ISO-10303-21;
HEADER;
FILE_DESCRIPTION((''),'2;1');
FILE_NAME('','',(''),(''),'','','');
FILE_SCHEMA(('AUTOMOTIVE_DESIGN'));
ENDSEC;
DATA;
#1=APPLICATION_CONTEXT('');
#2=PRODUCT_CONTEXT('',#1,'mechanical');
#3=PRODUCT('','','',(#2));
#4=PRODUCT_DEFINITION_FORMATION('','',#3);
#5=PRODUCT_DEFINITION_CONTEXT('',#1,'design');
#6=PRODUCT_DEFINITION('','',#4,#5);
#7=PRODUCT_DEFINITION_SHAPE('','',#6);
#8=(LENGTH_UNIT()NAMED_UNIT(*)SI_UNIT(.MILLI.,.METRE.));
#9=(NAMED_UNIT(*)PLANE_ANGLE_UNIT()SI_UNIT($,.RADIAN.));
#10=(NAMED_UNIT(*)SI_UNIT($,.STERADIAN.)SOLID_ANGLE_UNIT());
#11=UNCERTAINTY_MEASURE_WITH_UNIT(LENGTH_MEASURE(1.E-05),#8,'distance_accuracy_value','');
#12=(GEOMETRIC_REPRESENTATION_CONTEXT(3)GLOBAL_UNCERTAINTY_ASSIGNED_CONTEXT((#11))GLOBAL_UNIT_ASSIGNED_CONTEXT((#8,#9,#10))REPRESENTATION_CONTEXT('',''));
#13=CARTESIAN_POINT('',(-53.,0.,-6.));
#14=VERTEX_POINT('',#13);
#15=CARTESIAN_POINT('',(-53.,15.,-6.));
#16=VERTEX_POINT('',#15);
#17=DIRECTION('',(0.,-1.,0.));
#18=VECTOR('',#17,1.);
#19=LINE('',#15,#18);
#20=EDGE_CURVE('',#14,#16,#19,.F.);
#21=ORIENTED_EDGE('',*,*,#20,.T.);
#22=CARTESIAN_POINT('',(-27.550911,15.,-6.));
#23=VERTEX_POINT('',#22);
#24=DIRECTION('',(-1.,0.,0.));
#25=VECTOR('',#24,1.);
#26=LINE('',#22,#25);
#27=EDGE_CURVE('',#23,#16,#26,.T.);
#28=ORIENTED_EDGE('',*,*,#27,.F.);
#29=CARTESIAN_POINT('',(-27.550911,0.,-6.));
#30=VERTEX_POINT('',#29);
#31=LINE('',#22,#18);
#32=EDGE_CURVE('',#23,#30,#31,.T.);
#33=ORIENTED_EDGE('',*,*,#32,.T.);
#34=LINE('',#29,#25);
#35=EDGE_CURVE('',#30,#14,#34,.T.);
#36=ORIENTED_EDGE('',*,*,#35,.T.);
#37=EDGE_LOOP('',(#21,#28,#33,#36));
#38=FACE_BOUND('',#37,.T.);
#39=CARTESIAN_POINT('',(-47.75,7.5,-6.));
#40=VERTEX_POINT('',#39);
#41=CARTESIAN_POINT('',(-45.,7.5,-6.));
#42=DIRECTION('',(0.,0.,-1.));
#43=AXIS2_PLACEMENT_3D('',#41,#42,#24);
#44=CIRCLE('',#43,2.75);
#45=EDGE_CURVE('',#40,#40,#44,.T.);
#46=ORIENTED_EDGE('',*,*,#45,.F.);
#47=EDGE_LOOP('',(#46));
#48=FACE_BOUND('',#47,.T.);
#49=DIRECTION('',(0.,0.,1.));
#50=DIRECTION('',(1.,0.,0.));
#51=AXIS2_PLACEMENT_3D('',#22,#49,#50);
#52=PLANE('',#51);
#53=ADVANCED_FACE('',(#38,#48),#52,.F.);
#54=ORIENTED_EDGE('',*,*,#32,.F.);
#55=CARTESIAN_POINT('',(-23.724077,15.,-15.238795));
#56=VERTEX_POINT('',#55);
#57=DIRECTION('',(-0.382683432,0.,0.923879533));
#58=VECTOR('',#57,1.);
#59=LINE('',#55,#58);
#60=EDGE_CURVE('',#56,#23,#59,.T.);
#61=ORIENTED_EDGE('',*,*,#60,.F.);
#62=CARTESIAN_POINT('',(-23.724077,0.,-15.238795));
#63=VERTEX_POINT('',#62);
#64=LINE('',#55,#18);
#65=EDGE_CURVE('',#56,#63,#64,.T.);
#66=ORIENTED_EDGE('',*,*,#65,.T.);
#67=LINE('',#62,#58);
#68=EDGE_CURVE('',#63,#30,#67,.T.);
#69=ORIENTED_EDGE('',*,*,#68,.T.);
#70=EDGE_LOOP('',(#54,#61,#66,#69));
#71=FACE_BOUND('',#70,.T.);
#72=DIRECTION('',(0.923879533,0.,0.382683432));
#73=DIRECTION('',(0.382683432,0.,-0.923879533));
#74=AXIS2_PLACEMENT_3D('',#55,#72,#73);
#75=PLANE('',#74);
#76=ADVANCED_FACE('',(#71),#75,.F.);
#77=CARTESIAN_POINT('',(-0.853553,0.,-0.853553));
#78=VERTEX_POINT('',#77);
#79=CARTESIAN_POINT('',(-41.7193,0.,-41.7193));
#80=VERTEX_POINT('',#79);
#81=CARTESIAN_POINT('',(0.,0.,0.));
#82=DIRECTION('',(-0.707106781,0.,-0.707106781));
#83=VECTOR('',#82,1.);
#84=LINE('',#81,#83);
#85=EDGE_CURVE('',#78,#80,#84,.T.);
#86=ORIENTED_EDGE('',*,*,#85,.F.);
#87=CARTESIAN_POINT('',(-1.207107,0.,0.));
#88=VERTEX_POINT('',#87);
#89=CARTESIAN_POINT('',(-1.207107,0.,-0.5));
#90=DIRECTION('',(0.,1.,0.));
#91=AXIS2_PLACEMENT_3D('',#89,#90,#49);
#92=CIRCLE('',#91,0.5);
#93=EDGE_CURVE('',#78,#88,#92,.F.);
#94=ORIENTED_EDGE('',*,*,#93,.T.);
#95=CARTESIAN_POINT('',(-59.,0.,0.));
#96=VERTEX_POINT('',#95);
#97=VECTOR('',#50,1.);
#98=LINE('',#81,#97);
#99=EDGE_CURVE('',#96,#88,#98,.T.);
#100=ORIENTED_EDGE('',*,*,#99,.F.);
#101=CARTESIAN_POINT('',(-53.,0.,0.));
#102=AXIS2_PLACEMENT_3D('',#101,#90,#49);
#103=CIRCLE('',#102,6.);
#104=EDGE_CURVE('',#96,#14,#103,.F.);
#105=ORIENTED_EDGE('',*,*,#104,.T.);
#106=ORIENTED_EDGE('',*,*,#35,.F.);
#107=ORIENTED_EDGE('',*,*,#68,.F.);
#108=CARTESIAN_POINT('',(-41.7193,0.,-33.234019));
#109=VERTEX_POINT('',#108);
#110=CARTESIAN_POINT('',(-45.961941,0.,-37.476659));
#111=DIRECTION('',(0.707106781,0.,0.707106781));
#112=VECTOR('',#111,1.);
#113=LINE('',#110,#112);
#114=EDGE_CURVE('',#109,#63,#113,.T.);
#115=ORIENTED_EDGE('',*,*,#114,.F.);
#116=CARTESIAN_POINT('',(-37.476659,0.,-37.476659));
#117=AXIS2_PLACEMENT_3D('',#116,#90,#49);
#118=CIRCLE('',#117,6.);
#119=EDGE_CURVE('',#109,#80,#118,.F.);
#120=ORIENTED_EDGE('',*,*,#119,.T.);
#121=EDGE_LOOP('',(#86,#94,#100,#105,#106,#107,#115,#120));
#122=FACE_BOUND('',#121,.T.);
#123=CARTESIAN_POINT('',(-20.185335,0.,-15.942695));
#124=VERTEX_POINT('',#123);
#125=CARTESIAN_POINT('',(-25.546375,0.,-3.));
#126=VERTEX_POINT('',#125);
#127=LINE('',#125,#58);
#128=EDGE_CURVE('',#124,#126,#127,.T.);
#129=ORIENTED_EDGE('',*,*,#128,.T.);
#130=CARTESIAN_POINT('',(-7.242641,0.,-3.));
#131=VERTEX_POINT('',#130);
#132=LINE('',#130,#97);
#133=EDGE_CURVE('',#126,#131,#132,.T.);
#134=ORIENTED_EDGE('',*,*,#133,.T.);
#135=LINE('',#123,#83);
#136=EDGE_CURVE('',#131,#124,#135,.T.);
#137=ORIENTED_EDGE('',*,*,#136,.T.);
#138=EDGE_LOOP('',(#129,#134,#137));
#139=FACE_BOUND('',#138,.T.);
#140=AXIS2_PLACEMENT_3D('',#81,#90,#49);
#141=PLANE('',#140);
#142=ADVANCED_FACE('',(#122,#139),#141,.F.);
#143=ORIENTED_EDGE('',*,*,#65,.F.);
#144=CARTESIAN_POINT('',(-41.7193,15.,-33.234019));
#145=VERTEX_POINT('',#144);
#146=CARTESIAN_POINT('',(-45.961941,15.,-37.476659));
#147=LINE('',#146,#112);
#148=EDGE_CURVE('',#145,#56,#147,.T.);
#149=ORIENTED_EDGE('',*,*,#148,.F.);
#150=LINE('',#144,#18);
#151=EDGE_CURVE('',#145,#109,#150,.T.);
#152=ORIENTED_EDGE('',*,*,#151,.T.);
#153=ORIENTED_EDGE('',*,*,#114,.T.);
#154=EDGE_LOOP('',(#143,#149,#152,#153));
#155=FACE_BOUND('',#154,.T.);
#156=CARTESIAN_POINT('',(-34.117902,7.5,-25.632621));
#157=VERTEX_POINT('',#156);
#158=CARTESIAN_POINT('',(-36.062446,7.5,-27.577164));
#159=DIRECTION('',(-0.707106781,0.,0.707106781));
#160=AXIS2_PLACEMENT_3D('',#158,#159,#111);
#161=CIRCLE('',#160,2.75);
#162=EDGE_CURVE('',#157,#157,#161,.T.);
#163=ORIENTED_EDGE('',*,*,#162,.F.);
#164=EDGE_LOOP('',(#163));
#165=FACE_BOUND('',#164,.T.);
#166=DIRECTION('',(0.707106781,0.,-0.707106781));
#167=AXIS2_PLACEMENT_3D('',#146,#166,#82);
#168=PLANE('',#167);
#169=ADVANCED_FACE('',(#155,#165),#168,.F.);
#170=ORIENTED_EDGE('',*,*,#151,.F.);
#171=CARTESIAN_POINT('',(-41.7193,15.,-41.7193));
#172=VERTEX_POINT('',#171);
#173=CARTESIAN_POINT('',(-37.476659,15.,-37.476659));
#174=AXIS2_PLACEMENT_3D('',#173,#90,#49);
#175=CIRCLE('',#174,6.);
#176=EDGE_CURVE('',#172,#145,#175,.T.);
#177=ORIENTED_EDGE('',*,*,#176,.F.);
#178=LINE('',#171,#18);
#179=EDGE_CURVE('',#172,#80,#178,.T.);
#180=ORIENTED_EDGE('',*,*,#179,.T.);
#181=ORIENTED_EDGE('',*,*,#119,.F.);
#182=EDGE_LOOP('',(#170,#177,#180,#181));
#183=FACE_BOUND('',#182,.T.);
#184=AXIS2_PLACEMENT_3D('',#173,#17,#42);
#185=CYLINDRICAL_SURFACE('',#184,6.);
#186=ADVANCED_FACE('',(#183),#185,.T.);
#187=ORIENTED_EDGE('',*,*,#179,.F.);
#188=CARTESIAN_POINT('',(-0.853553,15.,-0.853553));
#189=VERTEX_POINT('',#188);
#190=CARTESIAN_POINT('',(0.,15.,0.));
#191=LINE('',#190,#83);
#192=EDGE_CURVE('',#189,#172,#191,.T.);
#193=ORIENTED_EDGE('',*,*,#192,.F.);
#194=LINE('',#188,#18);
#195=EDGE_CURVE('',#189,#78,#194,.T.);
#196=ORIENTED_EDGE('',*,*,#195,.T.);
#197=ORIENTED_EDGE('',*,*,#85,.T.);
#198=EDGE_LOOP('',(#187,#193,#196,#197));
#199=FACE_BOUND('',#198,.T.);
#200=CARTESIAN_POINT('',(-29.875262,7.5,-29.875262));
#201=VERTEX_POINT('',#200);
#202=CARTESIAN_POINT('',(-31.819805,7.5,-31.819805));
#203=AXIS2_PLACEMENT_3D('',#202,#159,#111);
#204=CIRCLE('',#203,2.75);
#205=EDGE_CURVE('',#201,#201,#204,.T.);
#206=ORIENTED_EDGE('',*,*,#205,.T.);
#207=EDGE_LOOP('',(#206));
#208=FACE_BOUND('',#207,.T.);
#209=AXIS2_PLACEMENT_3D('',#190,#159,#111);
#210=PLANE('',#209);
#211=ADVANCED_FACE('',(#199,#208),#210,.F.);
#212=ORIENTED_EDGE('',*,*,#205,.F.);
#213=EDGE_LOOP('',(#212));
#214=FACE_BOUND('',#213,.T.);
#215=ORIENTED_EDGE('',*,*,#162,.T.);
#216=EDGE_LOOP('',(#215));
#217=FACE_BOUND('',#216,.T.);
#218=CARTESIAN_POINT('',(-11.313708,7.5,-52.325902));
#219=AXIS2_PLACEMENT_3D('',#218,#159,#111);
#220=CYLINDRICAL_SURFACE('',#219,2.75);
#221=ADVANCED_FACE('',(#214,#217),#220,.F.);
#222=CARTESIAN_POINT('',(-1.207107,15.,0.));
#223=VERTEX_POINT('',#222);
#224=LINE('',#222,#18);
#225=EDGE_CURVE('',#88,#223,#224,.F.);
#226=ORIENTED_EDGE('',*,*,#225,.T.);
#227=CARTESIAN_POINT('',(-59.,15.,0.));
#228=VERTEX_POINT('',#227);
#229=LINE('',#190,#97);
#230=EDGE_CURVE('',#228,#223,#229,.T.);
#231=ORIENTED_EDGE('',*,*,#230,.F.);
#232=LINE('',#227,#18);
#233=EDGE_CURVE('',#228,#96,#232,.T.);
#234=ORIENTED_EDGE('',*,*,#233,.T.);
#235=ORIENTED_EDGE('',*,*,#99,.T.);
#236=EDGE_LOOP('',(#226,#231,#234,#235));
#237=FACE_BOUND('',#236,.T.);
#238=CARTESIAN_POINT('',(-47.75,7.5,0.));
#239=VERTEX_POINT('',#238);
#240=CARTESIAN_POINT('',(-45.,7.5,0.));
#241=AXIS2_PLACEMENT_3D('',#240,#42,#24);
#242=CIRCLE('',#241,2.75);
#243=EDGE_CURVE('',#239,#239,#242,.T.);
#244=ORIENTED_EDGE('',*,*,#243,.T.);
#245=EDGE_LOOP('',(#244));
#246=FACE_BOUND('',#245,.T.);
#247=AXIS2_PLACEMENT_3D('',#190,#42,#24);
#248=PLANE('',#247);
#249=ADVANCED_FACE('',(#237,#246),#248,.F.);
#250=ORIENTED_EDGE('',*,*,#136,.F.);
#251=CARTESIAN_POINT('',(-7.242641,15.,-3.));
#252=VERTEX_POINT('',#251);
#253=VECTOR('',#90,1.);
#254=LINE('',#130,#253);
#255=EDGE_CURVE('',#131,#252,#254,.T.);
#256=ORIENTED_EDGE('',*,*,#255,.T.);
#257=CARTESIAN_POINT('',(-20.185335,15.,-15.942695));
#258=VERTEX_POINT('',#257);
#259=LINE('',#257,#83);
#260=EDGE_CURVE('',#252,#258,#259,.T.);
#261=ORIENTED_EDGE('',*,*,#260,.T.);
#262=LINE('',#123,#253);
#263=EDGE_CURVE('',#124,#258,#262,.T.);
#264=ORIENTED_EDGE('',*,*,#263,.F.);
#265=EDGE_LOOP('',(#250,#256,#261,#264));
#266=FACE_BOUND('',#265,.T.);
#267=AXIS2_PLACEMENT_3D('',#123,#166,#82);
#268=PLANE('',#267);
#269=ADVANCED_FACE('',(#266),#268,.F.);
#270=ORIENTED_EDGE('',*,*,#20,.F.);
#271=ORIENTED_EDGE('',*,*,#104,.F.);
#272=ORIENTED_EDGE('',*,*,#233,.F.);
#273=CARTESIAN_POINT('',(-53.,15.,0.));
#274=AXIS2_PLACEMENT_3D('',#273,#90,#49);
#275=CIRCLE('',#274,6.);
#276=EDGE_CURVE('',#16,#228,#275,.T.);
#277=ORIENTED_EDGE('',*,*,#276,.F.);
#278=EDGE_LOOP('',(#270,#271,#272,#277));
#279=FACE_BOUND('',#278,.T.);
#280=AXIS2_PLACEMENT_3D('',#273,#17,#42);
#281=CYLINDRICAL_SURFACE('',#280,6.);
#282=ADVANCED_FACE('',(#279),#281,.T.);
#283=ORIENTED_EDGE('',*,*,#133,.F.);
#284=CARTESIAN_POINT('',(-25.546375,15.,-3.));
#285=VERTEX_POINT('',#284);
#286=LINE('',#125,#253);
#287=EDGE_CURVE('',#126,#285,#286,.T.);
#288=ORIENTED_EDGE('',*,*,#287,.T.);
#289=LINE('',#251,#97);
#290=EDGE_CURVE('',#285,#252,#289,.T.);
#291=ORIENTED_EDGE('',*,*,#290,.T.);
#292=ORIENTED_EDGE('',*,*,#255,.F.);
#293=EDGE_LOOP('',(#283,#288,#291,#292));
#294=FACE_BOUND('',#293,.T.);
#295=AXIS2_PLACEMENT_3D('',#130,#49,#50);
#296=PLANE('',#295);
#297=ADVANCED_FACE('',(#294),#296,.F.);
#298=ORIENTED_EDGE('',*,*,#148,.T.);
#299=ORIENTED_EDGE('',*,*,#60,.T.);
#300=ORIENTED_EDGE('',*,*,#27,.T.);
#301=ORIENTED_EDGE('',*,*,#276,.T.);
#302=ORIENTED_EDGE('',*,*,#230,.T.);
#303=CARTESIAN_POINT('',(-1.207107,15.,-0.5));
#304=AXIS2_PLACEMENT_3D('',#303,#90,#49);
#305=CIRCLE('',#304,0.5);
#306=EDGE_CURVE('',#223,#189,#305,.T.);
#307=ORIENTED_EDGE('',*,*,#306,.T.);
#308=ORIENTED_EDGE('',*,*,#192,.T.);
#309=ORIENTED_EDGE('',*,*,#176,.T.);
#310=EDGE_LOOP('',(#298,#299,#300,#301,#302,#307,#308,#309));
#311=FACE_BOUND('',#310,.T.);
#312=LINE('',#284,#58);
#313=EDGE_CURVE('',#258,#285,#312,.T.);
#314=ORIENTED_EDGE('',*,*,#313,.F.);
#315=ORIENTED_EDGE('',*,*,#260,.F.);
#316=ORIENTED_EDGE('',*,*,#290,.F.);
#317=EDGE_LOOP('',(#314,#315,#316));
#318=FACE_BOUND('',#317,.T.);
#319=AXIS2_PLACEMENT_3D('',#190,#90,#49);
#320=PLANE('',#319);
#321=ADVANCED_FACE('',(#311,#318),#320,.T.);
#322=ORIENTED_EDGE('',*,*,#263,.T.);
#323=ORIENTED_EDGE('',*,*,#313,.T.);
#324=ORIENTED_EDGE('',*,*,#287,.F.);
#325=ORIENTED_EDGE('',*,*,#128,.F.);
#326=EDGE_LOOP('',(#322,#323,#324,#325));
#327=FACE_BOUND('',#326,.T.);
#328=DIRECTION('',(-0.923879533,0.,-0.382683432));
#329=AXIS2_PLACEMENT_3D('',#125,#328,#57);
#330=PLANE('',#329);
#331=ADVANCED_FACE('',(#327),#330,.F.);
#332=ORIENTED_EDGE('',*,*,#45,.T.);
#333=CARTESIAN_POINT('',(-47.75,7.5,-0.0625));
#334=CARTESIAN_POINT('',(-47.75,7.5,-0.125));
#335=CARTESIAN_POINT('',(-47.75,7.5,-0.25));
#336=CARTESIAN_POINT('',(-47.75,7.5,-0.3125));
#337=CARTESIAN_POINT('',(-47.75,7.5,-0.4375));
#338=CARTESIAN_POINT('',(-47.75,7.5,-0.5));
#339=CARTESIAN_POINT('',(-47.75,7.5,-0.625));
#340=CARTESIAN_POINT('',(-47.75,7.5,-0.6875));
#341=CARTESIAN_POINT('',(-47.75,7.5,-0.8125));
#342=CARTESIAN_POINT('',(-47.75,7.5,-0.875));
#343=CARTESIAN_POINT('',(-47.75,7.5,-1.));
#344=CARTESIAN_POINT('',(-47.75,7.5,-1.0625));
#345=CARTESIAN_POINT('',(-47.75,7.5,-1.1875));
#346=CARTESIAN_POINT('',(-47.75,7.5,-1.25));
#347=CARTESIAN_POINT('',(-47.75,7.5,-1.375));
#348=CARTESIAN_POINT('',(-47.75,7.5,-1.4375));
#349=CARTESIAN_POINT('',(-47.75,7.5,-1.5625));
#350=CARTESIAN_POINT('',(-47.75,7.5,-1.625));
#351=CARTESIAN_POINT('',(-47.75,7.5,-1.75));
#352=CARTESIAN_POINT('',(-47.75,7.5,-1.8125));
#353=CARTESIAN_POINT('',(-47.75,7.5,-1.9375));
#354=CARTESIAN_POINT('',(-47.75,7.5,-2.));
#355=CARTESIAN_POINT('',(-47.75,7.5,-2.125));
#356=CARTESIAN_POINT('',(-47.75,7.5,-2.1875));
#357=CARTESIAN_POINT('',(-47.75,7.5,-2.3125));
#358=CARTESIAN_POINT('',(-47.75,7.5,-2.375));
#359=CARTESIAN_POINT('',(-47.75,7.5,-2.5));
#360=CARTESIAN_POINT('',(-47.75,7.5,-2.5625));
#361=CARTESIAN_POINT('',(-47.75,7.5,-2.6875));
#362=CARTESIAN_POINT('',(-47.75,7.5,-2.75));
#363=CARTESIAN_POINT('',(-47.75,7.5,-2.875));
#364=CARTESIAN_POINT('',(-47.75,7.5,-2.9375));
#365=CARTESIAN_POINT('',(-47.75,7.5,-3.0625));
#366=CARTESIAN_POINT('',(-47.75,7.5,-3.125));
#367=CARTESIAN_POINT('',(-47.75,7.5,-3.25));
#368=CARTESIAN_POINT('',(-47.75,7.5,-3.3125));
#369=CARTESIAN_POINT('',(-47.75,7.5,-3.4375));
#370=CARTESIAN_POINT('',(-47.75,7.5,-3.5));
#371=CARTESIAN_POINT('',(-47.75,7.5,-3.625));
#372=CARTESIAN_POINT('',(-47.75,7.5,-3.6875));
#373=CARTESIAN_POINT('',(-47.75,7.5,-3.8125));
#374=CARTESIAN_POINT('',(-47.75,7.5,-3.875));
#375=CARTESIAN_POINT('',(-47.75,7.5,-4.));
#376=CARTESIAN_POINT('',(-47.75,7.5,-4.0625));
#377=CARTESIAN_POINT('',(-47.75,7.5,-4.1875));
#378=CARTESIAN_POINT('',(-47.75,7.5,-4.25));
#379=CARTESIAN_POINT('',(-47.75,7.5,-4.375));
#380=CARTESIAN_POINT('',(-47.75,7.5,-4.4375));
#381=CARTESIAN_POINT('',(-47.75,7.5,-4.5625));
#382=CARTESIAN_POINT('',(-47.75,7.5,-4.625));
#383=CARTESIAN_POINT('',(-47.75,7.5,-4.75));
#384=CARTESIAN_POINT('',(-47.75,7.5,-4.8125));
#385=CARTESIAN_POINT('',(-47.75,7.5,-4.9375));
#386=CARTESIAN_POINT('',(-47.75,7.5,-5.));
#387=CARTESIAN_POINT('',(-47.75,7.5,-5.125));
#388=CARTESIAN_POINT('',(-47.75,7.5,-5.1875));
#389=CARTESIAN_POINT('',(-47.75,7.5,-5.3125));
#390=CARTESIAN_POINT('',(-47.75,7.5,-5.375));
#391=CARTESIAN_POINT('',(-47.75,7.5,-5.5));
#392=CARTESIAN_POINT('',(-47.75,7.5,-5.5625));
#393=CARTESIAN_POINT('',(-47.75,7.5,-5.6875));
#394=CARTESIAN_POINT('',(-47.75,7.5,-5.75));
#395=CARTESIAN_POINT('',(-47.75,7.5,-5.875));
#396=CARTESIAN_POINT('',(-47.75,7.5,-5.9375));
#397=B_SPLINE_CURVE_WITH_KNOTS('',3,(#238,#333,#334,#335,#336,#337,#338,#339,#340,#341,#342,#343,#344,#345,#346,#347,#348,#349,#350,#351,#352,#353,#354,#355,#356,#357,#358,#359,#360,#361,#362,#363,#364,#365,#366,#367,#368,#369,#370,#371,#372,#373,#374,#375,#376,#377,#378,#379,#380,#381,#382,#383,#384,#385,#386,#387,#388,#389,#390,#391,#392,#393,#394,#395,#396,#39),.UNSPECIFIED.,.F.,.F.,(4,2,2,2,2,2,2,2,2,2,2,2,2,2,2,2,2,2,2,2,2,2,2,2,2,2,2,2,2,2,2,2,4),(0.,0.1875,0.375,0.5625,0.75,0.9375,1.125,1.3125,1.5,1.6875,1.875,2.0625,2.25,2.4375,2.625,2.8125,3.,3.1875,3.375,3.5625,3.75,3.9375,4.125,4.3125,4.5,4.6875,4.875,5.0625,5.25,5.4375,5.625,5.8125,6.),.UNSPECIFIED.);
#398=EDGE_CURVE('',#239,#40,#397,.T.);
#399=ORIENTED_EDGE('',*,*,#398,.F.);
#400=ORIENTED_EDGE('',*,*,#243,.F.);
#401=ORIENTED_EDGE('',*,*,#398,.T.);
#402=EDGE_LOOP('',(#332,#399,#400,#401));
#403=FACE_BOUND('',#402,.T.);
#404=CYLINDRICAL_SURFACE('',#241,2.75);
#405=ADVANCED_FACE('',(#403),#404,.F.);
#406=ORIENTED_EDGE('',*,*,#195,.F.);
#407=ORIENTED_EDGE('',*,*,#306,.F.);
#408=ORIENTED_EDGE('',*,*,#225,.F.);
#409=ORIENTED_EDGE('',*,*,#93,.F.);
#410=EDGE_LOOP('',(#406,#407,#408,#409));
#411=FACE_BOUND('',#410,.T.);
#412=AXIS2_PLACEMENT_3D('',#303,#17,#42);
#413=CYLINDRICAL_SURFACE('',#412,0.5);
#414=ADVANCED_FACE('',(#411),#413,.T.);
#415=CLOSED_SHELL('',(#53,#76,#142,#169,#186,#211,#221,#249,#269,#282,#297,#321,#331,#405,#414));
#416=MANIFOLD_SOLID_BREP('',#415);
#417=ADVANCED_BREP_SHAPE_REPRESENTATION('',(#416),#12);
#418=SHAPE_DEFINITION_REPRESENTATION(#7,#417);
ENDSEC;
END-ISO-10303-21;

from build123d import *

# Parameters (mm, degrees)
BOSS_EXTRUDE1_DEPTH = 15
FILLET1_R           = 6
FILLET2_R           = 0.5
CUT_EXTRUDE1_DEPTH  = 74.800406503
SKETCH3_R           = 2.75
CUT_EXTRUDE2_DEPTH  = 71.582351894
SKETCH4_R           = 2.75
CUT_EXTRUDE3_DEPTH  = 74.04702868


with BuildPart() as part:
    # Sketch1 → Boss-Extrude1 (new body)
    with BuildSketch(Plane(origin=(0, 0, 0), x_dir=(1, 0, 0), z_dir=(0, 1, 0))):
        Polygon((0, 0), (-59, 0), (-59, 6), (-27.550911023, 6), (-23.724076699, 15.238795325), (-45.961940777, 37.476659403), (-41.71930009, 41.71930009), align=None)
    extrude(amount=BOSS_EXTRUDE1_DEPTH)

    # Fillet1
    fillet1_edges = [part.edges().sort_by_distance(p)[0] for p in [
        (-45.961940777, 7.5, -37.476659403),
        (-59, 7.5, -6),
    ]]
    fillet(fillet1_edges, radius=FILLET1_R - 0.0001)  # a hair under: the kernel refuses the full size

    # Fillet2
    fillet2_edges = [part.edges().sort_by_distance(p)[0] for p in [
        (0, 7.5, 0),
    ]]
    fillet(fillet2_edges, radius=FILLET2_R)

    # Sketch2 → Cut-Extrude1 (cut, through all)
    with BuildSketch(Plane(origin=(0, 15, 0), x_dir=(1, 0, 0), z_dir=(0, 1, 0))):
        Polygon((-20.185335418, 15.942694731), (-7.242640687, 3), (-25.546375109, 3), align=None)
    extrude(amount=-CUT_EXTRUDE1_DEPTH, mode=Mode.SUBTRACT)

    # Sketch3 → Cut-Extrude2 (cut, through all)
    with BuildSketch(Plane(origin=(0, 0, -6), x_dir=(-1, 0, 0), z_dir=(0, 0, -1))):
        with Locations((45, 7.5)):
            Circle(SKETCH3_R)
    extrude(amount=-CUT_EXTRUDE2_DEPTH, mode=Mode.SUBTRACT)

    # Sketch4 → Cut-Extrude3 (cut, through all)
    with BuildSketch(Plane(origin=(-4.242640687, 0, 4.242640687), x_dir=(0.7071067811865465, 0, 0.7071067811865486), z_dir=(-0.7071067811865486, 0, 0.7071067811865465))):
        with Locations((-45, 7.5)):
            Circle(SKETCH4_R)
    extrude(amount=-CUT_EXTRUDE3_DEPTH, mode=Mode.SUBTRACT)


solid = part.part
